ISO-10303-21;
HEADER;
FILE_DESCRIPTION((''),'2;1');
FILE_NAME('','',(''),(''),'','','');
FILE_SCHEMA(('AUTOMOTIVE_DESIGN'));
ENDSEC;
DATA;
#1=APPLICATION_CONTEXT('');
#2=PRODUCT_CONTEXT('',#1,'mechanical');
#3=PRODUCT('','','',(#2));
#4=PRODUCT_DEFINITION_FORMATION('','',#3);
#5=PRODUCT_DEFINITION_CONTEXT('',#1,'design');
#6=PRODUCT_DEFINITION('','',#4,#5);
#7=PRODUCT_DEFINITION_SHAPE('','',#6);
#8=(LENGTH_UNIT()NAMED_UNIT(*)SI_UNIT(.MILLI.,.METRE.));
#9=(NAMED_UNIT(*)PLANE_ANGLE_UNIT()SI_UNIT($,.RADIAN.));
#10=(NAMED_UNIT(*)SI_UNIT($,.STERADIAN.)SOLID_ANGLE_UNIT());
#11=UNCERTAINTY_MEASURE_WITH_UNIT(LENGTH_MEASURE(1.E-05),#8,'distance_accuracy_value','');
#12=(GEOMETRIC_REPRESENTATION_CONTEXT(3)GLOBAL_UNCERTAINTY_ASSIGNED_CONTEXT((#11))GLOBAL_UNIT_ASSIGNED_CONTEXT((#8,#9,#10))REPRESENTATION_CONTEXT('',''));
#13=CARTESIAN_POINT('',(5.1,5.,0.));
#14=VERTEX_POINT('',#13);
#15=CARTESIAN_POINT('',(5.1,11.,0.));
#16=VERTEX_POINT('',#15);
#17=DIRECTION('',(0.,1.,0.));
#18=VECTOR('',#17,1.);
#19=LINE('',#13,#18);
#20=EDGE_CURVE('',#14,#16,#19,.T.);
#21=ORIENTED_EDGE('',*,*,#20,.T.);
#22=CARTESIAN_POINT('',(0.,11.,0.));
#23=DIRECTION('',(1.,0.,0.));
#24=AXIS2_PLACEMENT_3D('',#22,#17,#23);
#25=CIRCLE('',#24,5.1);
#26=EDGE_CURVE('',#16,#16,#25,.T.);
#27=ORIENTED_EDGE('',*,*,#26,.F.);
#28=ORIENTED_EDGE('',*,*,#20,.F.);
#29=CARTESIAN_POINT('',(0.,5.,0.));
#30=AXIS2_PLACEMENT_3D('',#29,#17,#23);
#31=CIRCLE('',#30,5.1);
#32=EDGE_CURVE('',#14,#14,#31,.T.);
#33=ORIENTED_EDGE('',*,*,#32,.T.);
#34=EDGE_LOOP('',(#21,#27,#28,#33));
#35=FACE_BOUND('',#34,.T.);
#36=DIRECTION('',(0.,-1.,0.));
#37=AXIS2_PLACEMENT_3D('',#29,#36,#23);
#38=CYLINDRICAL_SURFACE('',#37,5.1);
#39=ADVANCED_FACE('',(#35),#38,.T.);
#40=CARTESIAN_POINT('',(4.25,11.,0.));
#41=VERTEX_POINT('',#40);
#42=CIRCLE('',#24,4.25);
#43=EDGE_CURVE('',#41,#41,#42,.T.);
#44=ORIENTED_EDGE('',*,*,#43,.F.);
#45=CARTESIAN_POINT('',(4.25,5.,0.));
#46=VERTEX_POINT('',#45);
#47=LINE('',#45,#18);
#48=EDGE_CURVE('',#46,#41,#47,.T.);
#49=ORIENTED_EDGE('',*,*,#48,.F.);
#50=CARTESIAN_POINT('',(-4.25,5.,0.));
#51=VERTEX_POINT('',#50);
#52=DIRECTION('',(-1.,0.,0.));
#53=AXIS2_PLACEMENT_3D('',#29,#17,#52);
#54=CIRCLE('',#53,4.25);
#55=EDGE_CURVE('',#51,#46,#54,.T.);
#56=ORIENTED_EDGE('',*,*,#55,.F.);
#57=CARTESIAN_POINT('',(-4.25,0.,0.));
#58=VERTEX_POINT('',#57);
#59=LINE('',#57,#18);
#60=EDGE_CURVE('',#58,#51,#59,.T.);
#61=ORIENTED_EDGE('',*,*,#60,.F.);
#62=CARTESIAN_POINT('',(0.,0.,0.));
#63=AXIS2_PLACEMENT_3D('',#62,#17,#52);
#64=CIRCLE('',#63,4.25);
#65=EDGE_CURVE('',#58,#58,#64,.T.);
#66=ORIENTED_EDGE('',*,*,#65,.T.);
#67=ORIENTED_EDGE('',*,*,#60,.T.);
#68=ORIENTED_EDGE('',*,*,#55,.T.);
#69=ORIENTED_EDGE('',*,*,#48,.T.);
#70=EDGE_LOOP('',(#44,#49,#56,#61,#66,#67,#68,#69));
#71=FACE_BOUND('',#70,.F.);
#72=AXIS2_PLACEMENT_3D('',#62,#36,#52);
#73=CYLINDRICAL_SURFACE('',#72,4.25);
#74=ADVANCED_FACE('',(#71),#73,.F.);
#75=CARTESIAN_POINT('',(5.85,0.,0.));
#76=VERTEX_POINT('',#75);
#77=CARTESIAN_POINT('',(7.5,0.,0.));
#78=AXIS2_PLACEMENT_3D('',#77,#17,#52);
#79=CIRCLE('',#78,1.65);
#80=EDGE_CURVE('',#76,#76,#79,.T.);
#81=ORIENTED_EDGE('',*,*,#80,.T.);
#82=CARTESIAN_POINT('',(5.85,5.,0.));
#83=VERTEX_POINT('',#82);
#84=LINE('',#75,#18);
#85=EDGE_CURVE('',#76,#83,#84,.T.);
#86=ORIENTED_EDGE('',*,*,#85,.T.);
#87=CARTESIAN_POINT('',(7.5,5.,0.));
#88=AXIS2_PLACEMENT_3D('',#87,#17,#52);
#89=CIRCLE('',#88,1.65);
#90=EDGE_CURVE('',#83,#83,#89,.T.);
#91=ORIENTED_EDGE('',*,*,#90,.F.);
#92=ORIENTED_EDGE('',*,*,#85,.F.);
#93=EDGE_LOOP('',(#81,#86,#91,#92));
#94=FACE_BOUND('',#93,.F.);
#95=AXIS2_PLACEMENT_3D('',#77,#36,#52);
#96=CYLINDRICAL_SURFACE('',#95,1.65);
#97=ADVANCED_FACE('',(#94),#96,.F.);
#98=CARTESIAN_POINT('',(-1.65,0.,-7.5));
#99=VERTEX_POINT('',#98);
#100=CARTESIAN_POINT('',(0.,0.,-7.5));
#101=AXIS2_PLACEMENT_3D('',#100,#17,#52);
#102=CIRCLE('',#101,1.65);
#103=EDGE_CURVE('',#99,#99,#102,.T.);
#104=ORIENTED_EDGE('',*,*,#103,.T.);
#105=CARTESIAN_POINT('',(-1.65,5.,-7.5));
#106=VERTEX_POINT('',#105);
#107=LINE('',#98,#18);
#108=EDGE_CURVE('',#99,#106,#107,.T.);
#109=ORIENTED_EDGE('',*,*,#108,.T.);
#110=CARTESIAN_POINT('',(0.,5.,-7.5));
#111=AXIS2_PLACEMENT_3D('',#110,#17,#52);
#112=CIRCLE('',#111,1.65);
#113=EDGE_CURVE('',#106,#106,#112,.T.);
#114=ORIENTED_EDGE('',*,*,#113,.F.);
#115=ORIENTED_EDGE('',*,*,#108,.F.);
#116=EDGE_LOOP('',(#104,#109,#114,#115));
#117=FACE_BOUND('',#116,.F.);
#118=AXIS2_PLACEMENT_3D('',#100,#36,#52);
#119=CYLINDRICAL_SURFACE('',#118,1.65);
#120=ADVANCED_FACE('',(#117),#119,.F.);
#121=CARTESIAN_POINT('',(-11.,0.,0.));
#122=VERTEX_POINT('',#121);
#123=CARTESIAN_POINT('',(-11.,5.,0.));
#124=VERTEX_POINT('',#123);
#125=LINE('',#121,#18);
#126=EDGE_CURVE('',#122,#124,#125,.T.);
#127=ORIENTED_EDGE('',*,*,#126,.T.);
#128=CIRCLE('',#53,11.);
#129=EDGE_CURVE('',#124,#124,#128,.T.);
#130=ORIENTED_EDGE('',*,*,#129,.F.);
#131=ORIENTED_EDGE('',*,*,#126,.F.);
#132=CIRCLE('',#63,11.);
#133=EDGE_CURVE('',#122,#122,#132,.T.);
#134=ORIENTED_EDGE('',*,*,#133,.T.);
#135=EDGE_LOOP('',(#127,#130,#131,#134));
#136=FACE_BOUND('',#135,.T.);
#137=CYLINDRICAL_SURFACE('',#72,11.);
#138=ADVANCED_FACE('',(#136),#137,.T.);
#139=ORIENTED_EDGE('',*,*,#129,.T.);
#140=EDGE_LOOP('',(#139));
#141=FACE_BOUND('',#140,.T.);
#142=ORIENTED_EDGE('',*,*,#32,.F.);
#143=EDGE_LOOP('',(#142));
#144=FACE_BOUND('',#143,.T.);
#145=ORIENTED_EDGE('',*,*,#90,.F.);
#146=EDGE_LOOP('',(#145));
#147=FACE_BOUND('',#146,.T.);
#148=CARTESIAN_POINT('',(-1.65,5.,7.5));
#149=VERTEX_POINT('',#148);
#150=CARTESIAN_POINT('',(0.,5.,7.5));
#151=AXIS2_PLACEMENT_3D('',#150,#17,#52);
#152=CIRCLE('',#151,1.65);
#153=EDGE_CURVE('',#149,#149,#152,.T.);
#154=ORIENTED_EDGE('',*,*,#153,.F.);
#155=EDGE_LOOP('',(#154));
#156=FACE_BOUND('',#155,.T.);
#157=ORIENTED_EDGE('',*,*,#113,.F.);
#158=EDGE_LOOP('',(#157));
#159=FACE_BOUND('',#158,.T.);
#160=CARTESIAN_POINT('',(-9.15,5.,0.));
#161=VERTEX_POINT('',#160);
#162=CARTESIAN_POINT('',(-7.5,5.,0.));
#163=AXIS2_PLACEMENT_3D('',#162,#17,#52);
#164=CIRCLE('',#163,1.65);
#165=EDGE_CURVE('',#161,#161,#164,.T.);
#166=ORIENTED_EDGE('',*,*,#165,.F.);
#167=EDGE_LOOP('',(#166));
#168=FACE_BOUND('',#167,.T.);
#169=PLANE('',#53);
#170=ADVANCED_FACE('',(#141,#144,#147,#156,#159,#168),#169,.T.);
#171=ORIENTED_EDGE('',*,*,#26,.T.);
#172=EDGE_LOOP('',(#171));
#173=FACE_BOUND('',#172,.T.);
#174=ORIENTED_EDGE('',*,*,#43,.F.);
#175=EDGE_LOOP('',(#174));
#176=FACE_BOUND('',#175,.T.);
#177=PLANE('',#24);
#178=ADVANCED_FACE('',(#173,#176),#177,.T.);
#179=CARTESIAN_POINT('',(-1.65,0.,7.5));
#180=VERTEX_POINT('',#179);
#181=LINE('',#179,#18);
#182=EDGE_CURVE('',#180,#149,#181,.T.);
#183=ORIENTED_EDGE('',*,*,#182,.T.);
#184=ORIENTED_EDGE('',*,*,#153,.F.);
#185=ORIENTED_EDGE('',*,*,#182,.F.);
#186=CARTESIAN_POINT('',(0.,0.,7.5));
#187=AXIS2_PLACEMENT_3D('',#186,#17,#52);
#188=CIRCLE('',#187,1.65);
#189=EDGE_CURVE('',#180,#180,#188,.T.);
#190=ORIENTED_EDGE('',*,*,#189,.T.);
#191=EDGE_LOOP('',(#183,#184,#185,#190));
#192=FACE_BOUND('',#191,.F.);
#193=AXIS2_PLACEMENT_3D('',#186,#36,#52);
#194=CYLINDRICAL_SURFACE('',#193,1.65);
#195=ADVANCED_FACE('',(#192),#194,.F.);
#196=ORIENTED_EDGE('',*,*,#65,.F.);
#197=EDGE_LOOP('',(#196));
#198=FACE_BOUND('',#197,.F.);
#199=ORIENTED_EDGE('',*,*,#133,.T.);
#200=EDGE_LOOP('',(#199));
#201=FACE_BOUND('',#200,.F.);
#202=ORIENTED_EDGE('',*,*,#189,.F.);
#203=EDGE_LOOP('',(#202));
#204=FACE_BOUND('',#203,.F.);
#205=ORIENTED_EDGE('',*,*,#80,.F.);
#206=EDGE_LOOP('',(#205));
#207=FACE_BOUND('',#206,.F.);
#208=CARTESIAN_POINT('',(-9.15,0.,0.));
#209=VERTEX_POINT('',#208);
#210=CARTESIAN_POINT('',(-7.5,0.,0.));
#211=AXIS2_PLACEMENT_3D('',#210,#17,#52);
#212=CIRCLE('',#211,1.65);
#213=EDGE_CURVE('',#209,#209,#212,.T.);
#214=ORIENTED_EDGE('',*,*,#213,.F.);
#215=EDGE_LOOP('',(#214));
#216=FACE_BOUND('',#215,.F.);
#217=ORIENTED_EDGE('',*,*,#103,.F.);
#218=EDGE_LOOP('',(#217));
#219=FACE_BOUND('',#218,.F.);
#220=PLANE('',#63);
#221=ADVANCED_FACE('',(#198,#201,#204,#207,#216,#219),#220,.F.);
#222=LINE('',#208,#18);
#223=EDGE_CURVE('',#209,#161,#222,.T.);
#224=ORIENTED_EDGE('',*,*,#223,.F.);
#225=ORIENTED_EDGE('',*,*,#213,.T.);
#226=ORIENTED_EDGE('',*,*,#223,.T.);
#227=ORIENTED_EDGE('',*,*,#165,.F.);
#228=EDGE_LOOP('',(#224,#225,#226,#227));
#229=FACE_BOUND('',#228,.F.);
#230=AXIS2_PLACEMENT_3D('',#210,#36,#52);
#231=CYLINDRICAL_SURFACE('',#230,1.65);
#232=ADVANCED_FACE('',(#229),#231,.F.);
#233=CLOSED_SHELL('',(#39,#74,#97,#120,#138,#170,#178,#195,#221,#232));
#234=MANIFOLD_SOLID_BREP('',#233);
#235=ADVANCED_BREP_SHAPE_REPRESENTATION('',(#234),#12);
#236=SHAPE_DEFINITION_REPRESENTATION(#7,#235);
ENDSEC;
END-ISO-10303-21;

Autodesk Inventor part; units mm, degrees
ref_plane "YZ Plane" through (0, 0, 0) normal (1, 0, 0) x (0, 1, 0)
ref_plane "XZ Plane" through (0, 0, 0) normal (0, 1, 0) x (-1, 0, 0)
ref_plane "XY Plane" through (0, 0, 0) normal (0, 0, 1) x (1, 0, 0)
sketch "Sketch1" plane through (0, 0, 0) normal (0, 1, 0) x (-1, 0, 0)
  circle A0 centre (0, 0) radius 11
  circle A1 centre (0, 0) radius 4.25
  circle A2 centre (0, -7.5) radius 1.65
  circle A3 centre (7.5, 0) radius 1.65
  circle A4 centre (0, 7.5) radius 1.65
  circle A5 centre (-7.5, 0) radius 1.65
  dimension "d0" = 22
  dimension "d1" = 8.5
  dimension "d2" = 3.3
  dimension "d3" = 7.5
  dimension "d6" = 360
extrude "Extrusion1" add sketch "Sketch1" along normal blind 5
sketch "Sketch2" plane through (0, 5, 0) normal (0, 1, 0) x (1, 0, 0)
  circle A0 centre (0, 0) radius 4.25 projected
  circle A1 centre (0, 0) radius 5.1
  dimension "d10" = 10.2
extrude "Extrusion2" add sketch "Sketch2" along normal blind 6
properties part number "ACOPLE_NUEVO_iMPOVISDO" material "Steel, Mild, Welded"
